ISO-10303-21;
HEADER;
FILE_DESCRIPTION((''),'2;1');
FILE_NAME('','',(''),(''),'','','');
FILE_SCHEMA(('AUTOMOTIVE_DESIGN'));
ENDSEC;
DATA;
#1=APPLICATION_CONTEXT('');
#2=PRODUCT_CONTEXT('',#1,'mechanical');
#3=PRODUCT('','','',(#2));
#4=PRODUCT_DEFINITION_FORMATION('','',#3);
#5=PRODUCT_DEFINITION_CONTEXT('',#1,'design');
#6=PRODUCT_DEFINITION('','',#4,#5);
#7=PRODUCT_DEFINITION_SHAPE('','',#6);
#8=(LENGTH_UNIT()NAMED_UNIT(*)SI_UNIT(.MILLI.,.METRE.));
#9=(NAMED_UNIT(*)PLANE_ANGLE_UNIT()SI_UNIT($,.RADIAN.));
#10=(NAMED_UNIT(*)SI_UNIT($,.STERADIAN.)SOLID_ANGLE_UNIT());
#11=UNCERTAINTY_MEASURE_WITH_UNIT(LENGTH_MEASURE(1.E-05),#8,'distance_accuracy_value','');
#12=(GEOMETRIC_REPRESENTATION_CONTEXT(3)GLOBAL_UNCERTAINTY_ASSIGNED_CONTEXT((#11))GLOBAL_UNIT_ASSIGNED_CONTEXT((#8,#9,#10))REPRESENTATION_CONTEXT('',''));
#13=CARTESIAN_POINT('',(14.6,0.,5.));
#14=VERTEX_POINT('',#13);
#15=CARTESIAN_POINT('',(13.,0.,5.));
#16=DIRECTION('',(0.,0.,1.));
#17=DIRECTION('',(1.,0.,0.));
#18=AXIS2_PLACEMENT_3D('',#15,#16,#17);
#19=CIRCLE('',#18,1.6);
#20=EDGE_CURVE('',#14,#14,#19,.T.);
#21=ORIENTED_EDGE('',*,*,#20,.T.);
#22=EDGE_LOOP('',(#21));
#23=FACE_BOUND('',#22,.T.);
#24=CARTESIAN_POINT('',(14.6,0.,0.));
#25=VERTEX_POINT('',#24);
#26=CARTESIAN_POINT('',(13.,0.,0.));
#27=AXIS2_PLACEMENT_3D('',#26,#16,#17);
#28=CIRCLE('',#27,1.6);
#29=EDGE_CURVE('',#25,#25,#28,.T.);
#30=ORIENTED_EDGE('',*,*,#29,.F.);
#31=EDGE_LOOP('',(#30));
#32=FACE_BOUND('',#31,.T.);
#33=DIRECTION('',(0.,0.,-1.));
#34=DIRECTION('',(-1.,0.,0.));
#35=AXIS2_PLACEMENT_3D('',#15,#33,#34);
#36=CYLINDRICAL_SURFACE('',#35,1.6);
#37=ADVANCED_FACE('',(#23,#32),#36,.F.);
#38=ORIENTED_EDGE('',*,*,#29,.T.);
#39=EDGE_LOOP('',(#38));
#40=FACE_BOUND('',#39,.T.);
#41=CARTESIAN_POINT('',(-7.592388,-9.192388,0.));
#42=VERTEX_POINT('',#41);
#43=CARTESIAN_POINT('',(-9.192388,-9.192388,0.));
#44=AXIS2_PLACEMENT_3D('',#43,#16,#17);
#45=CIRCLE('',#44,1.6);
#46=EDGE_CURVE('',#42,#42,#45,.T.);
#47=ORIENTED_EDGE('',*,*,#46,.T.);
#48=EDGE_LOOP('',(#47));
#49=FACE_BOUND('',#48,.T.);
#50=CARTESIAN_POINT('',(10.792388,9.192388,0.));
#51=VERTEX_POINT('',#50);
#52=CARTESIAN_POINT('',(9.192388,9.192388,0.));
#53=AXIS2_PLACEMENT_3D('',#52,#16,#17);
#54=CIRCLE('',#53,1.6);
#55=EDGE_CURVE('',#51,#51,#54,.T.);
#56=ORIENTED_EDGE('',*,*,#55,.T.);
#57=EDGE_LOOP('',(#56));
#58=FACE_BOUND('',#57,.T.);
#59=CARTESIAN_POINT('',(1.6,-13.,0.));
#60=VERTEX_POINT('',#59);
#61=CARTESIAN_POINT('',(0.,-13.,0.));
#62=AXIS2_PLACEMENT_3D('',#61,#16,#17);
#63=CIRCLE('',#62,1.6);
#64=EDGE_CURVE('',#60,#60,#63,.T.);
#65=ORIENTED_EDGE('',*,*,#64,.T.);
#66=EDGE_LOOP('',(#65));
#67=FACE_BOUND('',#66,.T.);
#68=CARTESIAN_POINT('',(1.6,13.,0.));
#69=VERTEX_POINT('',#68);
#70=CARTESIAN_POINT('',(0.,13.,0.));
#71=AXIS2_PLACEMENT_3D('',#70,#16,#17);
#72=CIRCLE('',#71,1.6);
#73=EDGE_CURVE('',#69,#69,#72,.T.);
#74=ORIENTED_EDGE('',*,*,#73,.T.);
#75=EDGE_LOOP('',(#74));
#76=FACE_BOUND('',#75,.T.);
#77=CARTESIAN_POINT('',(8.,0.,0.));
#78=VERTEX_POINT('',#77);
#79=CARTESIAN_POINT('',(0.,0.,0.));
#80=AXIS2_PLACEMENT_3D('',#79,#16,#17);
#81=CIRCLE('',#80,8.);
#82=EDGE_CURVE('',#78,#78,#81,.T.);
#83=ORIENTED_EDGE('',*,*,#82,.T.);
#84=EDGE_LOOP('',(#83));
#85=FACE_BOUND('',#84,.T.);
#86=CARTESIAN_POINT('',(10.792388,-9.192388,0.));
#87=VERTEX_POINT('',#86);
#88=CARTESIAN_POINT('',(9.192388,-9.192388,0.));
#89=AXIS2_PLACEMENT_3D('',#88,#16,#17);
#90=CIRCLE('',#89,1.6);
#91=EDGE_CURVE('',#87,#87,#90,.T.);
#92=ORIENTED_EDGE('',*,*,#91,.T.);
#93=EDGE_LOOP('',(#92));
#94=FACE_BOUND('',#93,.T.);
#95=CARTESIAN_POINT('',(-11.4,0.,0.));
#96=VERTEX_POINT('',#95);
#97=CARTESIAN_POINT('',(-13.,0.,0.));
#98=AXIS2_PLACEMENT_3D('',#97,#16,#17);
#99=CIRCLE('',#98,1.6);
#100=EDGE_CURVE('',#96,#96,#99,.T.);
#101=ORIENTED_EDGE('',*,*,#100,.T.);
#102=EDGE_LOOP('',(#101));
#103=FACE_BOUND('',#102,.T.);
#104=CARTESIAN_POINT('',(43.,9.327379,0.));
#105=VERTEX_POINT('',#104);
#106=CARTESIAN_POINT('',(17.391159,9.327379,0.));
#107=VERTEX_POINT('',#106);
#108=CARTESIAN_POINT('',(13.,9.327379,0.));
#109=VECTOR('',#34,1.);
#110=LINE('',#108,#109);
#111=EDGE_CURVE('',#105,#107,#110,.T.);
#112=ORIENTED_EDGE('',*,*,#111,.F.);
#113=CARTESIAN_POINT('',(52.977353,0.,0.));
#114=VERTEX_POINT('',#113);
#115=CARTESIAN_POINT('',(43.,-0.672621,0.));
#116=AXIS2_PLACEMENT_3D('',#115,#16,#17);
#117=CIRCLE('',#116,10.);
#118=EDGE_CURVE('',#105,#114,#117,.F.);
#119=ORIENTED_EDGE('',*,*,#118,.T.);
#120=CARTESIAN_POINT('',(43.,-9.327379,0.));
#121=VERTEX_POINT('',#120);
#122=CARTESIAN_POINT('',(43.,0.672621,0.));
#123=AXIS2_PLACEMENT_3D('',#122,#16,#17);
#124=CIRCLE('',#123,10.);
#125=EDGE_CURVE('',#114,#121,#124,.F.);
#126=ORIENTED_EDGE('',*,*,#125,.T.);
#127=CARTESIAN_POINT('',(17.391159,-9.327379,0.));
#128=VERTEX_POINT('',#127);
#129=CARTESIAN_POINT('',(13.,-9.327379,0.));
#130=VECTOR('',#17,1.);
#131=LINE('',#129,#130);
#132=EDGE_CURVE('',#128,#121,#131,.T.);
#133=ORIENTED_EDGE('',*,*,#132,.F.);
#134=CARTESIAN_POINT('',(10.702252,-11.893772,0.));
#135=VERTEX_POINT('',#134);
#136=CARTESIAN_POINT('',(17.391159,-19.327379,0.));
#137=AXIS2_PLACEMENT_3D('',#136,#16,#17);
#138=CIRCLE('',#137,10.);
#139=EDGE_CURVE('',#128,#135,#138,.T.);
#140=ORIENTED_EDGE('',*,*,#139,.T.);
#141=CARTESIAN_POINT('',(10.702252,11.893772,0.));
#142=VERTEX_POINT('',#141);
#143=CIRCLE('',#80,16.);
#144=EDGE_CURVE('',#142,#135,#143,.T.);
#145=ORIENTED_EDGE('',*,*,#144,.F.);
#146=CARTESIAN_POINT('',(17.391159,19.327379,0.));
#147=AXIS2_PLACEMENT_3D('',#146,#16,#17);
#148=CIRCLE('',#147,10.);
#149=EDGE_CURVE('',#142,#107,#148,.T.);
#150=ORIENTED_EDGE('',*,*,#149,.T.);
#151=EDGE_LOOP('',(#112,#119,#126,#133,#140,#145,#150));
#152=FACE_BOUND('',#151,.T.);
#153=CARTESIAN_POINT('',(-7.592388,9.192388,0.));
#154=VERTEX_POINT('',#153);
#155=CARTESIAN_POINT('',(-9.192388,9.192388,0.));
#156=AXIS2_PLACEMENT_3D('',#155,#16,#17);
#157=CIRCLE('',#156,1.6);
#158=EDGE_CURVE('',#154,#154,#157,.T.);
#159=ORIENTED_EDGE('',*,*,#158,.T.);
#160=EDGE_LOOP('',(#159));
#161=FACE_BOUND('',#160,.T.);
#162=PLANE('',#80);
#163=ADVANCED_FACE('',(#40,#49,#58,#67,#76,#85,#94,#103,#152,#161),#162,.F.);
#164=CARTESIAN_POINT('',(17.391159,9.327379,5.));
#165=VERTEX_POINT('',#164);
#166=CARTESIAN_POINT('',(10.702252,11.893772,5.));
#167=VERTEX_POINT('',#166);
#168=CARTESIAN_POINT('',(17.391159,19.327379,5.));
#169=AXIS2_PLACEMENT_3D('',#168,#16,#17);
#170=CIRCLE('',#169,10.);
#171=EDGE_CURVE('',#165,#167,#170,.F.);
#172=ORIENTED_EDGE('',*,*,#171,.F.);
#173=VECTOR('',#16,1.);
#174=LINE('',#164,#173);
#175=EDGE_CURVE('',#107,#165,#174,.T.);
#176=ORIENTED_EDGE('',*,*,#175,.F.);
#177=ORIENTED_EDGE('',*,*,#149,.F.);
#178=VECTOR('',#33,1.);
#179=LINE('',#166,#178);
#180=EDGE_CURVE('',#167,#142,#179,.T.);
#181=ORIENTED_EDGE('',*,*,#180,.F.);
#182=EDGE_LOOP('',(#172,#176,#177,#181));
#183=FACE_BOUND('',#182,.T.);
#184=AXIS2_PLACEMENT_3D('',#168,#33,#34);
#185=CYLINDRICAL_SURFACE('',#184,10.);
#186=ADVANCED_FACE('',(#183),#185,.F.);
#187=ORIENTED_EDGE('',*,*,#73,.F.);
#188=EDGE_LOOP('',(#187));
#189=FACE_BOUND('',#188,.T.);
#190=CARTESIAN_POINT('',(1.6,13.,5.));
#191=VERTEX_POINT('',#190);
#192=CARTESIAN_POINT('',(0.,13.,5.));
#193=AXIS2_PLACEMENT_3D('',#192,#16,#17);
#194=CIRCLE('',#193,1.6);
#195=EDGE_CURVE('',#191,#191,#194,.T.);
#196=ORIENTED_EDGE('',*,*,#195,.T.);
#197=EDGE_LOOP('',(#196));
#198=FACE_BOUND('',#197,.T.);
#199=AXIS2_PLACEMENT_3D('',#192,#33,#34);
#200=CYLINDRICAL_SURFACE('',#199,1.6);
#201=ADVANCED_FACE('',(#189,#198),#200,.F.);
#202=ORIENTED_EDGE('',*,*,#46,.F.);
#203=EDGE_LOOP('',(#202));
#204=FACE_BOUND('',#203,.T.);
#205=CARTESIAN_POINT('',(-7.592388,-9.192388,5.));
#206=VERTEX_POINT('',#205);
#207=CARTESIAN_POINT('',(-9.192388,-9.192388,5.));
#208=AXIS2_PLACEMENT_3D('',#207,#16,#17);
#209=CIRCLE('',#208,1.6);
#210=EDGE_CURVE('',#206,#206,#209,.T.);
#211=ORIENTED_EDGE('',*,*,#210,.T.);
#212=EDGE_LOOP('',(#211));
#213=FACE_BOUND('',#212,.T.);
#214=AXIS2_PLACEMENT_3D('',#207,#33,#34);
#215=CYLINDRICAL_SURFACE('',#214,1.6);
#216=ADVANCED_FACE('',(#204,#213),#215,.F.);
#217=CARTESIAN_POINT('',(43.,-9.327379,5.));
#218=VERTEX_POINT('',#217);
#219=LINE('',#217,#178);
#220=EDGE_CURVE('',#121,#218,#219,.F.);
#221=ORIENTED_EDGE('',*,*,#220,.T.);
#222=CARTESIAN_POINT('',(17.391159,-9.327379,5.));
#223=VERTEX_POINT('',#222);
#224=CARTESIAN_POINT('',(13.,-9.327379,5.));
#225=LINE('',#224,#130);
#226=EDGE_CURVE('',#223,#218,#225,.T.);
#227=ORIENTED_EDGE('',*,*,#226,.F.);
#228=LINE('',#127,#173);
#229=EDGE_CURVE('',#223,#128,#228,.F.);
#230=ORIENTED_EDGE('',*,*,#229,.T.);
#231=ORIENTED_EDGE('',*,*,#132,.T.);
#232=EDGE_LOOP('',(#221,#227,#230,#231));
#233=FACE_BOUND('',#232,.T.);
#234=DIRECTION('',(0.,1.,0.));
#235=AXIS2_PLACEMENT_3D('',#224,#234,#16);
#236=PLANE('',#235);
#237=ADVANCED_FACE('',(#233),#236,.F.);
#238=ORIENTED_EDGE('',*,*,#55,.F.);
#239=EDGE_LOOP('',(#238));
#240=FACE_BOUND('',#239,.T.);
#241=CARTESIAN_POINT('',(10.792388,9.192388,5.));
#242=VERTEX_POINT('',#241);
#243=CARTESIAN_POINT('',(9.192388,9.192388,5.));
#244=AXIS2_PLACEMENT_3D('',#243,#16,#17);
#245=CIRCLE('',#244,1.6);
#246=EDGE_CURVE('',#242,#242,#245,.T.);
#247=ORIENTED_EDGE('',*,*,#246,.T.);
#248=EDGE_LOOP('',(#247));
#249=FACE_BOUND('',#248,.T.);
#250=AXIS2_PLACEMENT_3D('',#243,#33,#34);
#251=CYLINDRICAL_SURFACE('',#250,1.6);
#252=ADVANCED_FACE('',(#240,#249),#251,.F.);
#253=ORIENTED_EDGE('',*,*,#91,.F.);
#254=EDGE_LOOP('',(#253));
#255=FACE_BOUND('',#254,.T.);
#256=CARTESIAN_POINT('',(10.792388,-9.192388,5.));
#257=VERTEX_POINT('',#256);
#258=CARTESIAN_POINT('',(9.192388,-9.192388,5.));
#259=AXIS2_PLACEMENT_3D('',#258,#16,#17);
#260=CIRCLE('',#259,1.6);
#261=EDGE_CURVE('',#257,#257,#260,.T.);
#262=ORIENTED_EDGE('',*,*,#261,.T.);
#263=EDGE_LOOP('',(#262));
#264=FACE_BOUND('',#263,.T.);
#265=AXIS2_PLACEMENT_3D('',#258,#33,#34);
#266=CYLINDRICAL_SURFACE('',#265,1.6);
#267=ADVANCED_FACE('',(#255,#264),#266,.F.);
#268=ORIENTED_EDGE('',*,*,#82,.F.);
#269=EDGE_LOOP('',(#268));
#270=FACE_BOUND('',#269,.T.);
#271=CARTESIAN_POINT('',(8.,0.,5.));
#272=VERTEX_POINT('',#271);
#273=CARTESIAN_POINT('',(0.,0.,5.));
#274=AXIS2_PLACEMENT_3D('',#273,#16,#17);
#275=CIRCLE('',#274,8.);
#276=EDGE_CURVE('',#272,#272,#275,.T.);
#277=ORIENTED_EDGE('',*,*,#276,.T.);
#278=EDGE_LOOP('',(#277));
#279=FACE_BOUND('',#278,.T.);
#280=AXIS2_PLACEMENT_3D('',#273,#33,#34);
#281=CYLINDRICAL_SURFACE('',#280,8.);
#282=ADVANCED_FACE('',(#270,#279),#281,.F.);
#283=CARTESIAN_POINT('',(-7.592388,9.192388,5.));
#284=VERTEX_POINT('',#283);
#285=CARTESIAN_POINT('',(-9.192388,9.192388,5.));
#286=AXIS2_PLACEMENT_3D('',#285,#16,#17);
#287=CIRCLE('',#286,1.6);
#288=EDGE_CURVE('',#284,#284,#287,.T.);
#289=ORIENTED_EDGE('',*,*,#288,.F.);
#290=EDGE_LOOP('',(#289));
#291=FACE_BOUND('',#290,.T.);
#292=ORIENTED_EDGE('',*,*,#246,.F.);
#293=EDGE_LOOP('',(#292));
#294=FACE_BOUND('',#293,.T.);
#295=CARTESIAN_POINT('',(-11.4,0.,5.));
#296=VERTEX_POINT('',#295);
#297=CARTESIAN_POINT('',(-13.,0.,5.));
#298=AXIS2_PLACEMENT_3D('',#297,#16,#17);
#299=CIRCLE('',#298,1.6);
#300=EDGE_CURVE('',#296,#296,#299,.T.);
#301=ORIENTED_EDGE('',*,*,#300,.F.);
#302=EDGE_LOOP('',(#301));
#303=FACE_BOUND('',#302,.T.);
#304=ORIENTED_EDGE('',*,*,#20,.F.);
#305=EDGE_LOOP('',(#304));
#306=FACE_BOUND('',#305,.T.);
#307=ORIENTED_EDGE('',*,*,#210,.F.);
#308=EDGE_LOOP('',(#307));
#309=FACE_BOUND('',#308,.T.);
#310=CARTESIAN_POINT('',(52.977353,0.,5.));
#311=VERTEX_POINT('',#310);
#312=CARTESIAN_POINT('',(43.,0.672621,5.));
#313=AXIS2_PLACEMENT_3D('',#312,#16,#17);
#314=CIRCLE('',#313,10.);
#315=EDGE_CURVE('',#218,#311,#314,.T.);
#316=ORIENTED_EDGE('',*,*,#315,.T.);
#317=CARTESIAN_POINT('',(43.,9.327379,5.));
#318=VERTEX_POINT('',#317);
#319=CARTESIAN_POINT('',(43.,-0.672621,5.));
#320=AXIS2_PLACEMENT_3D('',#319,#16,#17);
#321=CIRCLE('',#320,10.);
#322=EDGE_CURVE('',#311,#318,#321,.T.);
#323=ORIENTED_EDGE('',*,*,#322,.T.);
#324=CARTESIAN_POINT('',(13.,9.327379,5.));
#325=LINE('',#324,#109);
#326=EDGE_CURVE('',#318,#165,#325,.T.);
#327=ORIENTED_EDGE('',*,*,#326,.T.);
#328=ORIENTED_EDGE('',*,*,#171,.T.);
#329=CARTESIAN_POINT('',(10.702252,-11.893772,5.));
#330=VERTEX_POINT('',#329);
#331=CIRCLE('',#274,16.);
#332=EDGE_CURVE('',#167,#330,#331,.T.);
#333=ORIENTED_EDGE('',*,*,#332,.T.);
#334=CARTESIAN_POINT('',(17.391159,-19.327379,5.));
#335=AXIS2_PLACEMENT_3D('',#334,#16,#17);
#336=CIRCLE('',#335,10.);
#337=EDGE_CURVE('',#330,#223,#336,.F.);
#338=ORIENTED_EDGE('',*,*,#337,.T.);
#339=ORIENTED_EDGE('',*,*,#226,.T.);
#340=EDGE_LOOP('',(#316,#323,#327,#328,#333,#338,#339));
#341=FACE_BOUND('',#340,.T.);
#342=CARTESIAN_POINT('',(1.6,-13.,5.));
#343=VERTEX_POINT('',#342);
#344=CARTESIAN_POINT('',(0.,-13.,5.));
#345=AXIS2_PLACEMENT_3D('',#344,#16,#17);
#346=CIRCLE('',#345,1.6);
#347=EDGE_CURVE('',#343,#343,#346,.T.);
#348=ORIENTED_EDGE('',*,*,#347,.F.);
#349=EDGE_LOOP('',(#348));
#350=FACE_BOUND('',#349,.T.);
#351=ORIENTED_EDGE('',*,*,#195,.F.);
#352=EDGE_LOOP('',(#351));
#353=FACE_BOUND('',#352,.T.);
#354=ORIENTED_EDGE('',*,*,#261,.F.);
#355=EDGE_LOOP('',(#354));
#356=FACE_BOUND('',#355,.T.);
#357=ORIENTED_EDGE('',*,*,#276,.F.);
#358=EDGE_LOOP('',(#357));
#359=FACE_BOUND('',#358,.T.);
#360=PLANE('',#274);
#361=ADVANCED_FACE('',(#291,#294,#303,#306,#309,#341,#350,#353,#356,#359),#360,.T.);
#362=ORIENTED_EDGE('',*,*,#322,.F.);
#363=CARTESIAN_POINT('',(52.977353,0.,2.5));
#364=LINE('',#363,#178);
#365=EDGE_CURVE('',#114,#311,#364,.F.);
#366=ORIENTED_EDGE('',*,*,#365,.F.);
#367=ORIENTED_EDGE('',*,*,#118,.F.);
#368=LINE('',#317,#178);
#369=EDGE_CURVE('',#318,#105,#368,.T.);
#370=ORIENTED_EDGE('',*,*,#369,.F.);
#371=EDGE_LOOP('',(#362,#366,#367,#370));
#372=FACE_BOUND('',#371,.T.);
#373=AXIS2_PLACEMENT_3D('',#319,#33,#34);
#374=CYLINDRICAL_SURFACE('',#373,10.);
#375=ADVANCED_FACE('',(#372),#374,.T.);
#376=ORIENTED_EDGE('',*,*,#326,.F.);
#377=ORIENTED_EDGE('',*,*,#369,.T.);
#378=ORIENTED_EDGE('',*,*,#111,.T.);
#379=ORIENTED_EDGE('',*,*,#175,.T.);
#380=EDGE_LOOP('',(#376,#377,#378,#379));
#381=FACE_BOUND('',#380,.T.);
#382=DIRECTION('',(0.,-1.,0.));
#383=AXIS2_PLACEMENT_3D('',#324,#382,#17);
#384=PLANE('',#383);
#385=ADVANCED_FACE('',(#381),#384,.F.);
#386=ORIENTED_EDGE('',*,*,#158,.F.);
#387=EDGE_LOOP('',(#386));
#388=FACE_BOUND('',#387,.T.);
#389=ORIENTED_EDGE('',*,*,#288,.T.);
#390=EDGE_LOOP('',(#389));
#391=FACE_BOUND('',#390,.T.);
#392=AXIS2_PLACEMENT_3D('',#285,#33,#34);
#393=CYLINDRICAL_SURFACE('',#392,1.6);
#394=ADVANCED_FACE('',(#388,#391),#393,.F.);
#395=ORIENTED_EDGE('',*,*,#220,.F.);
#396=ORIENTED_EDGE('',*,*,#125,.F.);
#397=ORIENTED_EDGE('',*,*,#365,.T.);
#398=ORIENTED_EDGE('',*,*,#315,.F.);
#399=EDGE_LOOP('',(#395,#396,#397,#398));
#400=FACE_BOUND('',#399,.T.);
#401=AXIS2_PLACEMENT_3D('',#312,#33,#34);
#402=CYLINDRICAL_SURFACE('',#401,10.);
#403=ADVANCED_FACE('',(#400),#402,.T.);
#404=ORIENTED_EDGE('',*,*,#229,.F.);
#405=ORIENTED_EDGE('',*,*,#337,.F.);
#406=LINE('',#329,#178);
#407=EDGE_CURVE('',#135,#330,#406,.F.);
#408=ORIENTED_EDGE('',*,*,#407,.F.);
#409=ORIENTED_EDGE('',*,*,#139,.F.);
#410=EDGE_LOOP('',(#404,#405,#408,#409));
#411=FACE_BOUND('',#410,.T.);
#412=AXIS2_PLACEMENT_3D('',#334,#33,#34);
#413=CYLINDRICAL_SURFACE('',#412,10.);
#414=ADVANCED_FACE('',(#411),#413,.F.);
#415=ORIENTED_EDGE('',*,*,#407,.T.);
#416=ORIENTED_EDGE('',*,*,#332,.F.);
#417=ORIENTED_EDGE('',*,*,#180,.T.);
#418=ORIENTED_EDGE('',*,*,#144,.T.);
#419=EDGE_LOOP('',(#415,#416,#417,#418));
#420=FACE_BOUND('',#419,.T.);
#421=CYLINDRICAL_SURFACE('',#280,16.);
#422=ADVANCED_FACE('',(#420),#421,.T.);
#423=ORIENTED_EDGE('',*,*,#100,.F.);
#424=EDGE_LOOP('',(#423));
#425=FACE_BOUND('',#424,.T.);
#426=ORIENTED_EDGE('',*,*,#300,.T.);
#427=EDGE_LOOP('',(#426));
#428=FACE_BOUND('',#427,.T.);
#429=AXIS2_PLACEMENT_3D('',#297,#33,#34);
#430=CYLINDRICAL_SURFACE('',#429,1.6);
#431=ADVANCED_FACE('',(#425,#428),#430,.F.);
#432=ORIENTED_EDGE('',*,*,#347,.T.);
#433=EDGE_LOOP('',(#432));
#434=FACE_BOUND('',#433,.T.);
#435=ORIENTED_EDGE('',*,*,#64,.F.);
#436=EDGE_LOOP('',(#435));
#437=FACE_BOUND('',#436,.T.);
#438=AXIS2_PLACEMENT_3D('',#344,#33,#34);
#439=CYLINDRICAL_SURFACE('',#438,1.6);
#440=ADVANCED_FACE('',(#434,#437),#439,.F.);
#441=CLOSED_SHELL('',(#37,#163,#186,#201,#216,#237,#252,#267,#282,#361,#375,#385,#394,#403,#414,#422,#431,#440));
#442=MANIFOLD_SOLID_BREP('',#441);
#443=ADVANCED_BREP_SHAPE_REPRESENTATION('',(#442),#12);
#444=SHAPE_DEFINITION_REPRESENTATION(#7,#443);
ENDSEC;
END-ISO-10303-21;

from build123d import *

# Parameters (mm, degrees)
SKETCH1_R           = 1.6
SKETCH1_R_2         = 8
BOSS_EXTRUDE1_DEPTH = 5
FILLET1_R           = 10
FILLET2_R           = 10


with BuildPart() as part:
    # Sketch1 → Boss-Extrude1 (new body)
    with BuildSketch(Plane.XY):
        with BuildLine():
            Line((13, 9.327379053), (53, 9.327379053))
            Line((53, 9.327379053), (53, -9.327379053))
            Line((53, -9.327379053), (13, -9.327379053))
            ThreePointArc((13, -9.327379053), (-16, 0), (13, 9.327379053))
        make_face()
        with Locations((0, 13)):
            Circle(SKETCH1_R, mode=Mode.SUBTRACT)
        with Locations((9.192388155, 9.192388155)):
            Circle(SKETCH1_R, mode=Mode.SUBTRACT)
        with Locations((13, 0)):
            Circle(SKETCH1_R, mode=Mode.SUBTRACT)
        with Locations((9.192388155, -9.192388155)):
            Circle(SKETCH1_R, mode=Mode.SUBTRACT)
        with Locations((0, -13)):
            Circle(SKETCH1_R, mode=Mode.SUBTRACT)
        with Locations((-9.192388155, -9.192388155)):
            Circle(SKETCH1_R, mode=Mode.SUBTRACT)
        with Locations((-13, 0)):
            Circle(SKETCH1_R, mode=Mode.SUBTRACT)
        with Locations((-9.192388155, 9.192388155)):
            Circle(SKETCH1_R, mode=Mode.SUBTRACT)
        Circle(SKETCH1_R_2, mode=Mode.SUBTRACT)
    extrude(amount=BOSS_EXTRUDE1_DEPTH)

    # Fillet1
    # the kernel refuses this fillet: 10 mm, written as the material it takes off along each edge
    with BuildSketch(Plane(origin=(53, -9.327379053, -25), x_dir=(0, 1, 0), z_dir=(0, 0, 1)), Plane(origin=(53, 9.327379053, -25), x_dir=(-1, 0, 0), z_dir=(0, 0, 1))) as fillet1_piece_1:
        with BuildLine():
            CenterArc((FILLET1_R, FILLET1_R), FILLET1_R, 180, 90)
            Line((0, FILLET1_R), (0, 0))
            Line((0, 0), (FILLET1_R, 0))
        make_face()
    extrude(amount=55, mode=Mode.SUBTRACT)

    # Fillet2
    fillet2_edges = [part.edges().sort_by_distance(p)[0] for p in [
        (13, 9.327379053, 2.5),
        (13, -9.327379053, 2.5),
    ]]
    fillet(fillet2_edges, radius=FILLET2_R)


solid = part.part
